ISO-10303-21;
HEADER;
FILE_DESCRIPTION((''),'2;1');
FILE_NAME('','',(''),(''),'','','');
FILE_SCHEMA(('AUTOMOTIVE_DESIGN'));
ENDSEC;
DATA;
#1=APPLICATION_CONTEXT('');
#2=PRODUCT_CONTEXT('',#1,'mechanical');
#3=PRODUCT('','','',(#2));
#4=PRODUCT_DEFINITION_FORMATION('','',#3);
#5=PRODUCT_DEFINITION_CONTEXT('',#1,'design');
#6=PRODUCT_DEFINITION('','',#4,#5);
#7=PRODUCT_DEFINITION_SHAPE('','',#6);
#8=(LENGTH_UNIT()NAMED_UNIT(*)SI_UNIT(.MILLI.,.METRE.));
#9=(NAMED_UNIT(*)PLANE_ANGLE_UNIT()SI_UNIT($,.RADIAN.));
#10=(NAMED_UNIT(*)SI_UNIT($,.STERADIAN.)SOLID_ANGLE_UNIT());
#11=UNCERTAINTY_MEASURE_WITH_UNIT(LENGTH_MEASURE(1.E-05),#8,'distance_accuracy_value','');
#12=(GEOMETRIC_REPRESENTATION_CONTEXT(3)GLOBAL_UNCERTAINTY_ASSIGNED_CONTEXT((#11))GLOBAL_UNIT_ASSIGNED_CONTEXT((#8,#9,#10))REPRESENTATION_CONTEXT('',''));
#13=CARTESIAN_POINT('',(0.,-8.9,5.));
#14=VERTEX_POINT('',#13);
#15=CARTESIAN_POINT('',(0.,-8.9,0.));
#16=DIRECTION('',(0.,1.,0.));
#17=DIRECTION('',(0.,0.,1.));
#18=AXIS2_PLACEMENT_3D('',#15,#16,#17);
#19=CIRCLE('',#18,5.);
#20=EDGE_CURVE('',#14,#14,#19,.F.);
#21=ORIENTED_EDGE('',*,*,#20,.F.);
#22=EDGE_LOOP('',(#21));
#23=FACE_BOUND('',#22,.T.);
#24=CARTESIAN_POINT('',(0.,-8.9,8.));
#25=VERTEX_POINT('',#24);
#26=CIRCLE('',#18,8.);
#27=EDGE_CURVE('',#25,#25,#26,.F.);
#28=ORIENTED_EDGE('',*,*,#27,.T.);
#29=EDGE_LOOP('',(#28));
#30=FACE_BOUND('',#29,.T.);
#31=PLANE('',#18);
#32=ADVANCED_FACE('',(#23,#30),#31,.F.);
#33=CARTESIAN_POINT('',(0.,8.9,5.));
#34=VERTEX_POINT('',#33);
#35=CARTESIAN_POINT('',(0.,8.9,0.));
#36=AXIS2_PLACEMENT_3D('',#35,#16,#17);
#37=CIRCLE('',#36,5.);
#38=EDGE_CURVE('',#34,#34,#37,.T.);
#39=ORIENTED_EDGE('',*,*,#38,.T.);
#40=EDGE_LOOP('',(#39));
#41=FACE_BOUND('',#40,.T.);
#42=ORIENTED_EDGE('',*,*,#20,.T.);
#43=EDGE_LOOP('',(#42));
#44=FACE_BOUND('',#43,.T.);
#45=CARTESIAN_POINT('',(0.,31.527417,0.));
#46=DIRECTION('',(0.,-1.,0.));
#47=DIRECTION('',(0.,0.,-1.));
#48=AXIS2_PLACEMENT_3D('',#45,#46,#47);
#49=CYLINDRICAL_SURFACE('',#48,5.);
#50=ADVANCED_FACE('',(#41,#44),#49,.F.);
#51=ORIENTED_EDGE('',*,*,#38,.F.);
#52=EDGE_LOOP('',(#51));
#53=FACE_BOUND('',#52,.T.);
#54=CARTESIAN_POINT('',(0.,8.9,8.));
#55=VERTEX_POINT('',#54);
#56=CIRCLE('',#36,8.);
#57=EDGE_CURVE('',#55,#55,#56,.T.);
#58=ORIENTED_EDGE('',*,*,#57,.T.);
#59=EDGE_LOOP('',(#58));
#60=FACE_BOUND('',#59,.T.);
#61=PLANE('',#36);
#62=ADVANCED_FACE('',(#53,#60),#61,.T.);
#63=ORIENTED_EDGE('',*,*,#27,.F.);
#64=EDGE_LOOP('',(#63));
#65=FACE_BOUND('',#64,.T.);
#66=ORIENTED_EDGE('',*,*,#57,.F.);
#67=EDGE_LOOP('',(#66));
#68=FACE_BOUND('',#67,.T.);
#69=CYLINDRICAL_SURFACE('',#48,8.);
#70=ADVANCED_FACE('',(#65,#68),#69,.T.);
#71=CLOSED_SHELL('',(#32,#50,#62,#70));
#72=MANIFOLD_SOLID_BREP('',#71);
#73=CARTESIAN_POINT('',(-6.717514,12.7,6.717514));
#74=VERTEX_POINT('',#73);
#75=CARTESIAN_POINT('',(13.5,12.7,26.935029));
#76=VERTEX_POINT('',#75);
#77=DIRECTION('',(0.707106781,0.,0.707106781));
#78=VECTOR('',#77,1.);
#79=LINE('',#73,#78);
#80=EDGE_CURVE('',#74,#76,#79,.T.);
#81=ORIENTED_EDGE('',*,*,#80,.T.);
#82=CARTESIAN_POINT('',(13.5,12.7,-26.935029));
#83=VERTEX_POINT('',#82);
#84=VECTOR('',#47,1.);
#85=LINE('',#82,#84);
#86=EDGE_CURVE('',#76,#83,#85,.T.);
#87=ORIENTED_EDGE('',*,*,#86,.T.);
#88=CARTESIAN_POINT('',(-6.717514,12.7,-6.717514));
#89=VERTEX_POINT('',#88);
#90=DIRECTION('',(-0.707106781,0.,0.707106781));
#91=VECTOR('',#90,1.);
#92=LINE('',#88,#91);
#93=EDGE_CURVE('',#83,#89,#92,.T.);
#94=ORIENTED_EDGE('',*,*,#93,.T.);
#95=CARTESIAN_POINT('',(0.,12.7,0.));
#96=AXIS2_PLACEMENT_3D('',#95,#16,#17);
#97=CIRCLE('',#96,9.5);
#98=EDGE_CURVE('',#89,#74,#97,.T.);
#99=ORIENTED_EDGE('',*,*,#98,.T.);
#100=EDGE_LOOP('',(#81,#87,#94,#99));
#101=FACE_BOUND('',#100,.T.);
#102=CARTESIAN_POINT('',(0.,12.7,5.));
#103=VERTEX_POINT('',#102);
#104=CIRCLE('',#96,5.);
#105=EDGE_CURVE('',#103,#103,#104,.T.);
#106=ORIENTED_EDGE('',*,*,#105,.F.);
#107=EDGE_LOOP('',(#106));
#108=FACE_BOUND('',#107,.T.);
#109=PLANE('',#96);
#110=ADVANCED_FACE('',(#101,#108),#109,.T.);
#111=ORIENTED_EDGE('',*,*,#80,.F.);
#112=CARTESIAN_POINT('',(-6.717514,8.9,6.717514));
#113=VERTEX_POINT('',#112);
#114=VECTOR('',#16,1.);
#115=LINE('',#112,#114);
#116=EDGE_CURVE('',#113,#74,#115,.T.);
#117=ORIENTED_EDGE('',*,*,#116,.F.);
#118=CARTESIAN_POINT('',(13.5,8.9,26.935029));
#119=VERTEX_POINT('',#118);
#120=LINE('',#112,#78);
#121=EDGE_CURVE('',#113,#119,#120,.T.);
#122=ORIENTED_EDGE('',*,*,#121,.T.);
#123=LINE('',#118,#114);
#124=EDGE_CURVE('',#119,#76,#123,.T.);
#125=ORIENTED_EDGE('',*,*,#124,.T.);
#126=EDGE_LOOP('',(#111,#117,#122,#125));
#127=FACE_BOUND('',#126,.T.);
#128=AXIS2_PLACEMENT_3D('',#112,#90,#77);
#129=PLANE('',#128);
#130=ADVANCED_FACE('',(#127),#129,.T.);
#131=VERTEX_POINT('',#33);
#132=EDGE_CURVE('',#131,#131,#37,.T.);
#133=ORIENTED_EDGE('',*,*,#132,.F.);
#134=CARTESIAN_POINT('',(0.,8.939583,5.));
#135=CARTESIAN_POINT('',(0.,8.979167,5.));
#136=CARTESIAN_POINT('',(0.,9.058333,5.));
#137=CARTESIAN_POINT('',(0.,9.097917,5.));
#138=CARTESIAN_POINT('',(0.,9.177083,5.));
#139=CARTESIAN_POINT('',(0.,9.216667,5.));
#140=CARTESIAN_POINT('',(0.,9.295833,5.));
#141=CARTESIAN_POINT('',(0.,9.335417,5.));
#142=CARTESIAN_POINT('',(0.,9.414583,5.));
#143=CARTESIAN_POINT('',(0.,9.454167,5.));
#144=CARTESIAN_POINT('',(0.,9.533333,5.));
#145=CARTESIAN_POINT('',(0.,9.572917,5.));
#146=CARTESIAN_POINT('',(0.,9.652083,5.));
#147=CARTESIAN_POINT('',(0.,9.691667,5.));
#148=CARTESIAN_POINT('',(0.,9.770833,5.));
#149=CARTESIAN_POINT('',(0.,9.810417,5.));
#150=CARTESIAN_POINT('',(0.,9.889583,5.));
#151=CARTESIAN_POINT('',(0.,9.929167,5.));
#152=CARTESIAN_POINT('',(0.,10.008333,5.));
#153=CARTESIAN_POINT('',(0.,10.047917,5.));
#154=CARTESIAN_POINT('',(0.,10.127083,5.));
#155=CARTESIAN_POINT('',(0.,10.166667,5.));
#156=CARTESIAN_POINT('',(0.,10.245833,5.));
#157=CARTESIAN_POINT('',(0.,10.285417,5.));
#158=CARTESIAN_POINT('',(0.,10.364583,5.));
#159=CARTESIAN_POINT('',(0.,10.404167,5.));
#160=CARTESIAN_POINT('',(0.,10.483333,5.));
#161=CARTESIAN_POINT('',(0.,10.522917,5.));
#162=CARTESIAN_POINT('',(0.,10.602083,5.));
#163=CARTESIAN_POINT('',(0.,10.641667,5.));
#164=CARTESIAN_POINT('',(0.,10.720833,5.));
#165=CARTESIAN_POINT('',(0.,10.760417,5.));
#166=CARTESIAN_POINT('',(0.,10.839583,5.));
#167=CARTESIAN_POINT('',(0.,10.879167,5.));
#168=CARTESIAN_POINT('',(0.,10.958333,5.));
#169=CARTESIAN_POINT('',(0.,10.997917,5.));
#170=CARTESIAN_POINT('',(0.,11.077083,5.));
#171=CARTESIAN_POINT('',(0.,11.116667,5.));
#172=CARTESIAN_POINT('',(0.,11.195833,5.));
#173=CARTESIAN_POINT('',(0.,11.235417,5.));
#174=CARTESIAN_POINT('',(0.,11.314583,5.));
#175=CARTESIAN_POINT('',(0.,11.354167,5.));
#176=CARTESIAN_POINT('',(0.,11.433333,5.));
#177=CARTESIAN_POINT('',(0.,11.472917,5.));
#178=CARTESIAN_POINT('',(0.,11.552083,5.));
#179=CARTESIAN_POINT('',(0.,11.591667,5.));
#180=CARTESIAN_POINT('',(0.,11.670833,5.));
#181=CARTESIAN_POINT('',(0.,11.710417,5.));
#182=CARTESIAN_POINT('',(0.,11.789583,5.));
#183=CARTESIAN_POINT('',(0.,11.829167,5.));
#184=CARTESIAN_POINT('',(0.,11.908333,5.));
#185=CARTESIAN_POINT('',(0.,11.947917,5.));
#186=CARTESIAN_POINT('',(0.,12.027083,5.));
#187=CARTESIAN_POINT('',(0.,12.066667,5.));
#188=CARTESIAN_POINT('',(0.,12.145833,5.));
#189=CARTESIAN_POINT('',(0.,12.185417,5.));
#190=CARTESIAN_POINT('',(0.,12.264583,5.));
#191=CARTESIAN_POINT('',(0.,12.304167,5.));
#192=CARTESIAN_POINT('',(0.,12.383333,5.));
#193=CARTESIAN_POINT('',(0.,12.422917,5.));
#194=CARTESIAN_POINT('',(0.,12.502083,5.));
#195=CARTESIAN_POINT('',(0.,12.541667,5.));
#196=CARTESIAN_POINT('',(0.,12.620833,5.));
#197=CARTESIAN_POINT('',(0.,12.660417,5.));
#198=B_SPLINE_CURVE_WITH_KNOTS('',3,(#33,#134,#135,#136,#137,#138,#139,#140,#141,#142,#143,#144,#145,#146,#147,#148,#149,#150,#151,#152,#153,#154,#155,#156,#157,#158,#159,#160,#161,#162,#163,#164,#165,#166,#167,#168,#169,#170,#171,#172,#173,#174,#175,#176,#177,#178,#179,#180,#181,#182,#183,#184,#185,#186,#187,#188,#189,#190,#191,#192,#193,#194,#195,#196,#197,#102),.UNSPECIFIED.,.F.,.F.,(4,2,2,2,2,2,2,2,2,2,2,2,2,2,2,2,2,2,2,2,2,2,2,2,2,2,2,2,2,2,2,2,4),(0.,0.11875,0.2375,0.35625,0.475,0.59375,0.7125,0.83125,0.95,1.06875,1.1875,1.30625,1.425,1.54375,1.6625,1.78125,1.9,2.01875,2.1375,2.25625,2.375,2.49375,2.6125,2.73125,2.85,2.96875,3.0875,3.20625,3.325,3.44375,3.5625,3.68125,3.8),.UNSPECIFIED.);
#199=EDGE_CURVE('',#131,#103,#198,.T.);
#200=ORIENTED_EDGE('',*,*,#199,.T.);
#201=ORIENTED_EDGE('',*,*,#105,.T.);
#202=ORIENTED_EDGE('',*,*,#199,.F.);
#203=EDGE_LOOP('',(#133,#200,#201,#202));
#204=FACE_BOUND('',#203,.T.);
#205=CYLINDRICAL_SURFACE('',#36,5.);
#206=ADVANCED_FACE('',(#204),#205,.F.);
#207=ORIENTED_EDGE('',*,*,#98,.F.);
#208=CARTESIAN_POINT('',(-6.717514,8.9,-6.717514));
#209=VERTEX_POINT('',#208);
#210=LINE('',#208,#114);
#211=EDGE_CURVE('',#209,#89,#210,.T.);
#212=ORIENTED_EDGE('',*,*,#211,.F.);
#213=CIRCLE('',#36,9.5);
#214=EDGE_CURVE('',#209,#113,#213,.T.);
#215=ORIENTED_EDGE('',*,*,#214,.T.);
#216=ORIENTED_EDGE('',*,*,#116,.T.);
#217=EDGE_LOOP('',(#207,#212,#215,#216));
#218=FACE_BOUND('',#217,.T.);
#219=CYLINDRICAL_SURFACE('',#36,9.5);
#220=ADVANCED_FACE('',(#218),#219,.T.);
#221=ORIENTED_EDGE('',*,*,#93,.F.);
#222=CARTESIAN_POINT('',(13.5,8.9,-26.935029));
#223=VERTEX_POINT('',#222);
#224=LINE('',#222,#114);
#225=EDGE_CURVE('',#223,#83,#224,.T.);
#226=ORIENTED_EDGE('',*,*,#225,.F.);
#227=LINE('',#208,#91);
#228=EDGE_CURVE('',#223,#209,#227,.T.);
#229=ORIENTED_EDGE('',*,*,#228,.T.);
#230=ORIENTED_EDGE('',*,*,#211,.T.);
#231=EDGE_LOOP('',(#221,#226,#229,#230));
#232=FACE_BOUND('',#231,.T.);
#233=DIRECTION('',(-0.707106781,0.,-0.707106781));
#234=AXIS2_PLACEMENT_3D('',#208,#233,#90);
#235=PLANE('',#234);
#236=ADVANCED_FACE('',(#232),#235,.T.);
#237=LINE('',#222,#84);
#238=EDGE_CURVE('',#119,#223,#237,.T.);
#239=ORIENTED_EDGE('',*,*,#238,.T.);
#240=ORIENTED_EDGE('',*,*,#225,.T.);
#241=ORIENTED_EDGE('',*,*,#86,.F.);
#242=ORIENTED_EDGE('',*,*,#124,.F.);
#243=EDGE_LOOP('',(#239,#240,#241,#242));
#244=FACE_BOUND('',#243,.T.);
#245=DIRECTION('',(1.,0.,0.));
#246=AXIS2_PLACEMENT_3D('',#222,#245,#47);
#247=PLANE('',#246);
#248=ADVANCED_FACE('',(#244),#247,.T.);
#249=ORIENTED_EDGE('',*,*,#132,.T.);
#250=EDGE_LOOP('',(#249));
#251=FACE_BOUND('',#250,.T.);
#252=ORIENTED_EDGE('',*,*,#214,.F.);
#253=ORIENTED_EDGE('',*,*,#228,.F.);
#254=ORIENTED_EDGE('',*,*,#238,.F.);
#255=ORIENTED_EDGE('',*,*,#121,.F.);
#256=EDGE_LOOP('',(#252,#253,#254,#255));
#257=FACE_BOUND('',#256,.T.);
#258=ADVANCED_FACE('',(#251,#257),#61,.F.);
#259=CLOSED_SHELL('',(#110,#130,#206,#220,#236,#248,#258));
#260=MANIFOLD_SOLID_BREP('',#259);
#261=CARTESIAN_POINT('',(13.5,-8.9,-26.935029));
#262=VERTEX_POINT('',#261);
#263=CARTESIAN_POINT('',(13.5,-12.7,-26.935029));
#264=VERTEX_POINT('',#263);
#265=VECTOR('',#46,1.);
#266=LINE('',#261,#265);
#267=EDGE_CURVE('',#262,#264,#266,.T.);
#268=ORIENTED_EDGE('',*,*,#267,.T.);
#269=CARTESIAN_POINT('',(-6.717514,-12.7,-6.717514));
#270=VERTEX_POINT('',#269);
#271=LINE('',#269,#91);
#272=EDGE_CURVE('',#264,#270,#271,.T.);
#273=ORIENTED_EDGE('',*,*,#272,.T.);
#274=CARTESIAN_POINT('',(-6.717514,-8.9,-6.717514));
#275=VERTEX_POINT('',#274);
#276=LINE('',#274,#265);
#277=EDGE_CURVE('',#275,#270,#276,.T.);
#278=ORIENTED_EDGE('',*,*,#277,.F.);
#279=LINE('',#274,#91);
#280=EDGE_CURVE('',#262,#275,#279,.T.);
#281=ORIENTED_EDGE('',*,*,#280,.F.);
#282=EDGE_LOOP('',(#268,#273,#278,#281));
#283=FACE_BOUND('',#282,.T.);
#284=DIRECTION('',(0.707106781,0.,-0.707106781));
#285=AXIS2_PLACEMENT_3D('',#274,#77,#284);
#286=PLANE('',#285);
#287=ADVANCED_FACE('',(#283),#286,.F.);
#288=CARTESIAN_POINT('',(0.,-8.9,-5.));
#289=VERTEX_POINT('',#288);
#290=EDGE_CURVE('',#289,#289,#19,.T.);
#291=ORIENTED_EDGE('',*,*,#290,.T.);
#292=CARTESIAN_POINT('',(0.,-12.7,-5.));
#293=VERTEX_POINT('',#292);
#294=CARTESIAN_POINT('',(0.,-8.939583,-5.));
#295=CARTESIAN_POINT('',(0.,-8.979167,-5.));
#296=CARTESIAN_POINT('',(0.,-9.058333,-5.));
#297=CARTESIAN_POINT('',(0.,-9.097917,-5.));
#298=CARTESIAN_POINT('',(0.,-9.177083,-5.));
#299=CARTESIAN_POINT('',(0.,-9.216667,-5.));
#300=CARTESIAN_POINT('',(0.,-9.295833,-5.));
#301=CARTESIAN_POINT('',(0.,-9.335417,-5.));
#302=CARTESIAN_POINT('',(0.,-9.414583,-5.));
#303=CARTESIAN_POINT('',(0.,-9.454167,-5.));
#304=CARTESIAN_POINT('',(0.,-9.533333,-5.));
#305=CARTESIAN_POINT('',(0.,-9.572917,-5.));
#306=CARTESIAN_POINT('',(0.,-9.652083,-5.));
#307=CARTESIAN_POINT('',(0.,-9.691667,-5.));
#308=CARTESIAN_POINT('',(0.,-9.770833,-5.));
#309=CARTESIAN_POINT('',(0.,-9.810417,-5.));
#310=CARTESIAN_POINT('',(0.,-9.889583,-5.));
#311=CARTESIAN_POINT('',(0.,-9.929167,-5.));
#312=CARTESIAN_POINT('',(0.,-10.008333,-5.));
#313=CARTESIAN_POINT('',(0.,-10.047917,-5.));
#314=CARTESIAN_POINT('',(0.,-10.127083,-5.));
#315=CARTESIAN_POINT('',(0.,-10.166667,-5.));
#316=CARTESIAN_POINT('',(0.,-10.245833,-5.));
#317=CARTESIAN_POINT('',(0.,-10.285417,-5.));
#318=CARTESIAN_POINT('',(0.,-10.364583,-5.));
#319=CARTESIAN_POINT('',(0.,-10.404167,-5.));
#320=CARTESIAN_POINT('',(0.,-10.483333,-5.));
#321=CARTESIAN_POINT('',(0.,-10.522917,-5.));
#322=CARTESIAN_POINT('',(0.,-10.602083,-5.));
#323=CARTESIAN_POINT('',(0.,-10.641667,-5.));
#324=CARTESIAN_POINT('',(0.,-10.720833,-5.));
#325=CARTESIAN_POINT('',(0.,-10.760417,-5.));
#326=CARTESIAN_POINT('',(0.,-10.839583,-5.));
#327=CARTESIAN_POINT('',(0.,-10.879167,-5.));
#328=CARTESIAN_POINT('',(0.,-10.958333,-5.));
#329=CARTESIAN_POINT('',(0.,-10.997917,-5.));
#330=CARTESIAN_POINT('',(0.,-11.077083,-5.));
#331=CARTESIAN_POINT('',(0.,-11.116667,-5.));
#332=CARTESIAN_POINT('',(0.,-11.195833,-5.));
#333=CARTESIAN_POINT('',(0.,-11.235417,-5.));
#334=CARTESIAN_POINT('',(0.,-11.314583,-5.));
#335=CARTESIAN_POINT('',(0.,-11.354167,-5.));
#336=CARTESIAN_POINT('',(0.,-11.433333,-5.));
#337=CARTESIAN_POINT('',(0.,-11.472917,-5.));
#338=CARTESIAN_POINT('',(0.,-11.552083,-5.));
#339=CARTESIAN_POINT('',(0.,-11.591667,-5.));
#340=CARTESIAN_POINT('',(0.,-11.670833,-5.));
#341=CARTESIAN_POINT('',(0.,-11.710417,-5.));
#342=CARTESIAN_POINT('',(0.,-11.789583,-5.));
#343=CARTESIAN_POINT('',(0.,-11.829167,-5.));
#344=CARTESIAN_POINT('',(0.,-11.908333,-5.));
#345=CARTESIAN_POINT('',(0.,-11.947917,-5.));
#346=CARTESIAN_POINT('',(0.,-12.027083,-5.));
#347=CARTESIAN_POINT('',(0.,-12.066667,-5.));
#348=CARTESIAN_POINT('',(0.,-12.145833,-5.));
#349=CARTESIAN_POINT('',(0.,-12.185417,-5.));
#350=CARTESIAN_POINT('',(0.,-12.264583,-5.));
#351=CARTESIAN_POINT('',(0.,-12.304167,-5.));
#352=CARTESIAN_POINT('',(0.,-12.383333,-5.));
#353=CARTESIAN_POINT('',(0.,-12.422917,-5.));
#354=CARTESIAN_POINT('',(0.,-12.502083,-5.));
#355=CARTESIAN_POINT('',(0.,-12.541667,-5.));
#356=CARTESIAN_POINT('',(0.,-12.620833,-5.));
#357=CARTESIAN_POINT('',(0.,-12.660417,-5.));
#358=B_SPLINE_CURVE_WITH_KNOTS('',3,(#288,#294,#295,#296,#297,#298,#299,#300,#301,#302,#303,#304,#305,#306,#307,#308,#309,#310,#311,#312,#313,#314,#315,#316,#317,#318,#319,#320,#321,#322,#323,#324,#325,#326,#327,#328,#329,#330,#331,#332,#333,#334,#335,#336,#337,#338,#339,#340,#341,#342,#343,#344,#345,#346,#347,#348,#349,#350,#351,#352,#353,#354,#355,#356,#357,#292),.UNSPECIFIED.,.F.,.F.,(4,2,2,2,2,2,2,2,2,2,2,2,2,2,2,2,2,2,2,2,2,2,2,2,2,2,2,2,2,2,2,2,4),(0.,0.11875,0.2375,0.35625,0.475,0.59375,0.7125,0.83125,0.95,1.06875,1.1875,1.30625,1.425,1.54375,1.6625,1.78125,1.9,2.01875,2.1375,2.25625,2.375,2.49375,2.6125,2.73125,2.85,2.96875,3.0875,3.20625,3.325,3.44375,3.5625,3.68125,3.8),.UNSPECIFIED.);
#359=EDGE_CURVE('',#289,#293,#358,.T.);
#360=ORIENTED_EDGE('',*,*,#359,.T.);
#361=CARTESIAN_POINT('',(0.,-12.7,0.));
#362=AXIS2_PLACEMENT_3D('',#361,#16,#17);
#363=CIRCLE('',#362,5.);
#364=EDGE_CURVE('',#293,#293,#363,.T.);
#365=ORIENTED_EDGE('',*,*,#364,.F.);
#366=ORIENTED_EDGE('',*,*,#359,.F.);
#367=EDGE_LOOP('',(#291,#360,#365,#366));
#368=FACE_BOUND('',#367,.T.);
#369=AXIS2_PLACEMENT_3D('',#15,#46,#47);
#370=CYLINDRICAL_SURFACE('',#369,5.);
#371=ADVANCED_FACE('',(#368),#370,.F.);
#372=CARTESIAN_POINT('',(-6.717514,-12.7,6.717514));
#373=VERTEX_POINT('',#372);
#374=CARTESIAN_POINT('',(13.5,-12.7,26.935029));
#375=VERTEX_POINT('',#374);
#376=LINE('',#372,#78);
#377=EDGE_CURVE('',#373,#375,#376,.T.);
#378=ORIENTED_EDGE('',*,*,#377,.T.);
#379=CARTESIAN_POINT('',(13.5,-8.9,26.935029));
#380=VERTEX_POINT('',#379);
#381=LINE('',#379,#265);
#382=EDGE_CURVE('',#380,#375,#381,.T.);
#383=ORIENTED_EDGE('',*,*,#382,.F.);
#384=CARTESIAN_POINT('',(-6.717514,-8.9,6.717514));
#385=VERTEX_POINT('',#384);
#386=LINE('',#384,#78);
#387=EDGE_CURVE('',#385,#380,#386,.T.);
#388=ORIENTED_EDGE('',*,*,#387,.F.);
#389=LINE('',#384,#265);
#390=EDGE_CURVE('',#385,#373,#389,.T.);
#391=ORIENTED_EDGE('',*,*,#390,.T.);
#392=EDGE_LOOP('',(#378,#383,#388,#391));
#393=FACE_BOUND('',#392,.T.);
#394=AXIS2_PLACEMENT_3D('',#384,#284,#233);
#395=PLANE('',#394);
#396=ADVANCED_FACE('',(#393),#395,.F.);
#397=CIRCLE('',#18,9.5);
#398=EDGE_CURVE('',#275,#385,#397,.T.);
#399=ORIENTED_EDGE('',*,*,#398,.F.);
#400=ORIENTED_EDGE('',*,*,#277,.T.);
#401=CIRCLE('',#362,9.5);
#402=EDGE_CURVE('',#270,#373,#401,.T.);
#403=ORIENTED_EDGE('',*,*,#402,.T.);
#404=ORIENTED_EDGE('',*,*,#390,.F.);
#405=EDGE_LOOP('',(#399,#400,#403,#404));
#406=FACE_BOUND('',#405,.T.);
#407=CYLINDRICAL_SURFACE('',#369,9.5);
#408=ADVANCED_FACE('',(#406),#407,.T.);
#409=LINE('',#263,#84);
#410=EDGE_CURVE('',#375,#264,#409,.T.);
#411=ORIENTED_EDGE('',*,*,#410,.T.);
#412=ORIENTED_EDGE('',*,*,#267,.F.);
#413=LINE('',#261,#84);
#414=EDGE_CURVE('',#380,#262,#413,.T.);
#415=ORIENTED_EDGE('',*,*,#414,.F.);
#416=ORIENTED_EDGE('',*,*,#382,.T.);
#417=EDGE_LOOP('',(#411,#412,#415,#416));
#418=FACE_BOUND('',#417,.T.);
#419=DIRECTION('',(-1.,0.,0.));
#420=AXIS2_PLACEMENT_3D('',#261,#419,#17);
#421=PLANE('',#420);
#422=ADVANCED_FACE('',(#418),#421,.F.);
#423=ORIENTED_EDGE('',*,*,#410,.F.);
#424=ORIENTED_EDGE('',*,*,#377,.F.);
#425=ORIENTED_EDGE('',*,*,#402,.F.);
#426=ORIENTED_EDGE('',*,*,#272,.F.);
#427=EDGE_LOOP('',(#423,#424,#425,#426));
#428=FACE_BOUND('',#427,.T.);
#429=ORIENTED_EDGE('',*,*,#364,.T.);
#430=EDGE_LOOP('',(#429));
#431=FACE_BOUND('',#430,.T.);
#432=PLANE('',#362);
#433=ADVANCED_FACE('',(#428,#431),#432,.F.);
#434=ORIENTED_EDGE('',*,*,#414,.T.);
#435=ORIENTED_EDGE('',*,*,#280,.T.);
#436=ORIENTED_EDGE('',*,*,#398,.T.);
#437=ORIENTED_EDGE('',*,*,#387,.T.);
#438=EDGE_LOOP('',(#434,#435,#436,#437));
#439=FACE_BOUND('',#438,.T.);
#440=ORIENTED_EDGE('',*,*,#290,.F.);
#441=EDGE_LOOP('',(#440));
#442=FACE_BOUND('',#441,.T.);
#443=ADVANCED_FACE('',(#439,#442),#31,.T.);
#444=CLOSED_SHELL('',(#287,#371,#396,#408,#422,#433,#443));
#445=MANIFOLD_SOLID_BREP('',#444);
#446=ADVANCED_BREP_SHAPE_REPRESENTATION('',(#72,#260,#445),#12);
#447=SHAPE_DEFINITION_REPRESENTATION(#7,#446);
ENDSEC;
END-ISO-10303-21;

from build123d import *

# Parameters (mm, degrees)
BOSS_EXTRUDE1_START       = 12.7
SKETCH1_R                 = 5
BOSS_EXTRUDE1_DEPTH       = 3.8
BOSS_EXTRUDE2_START       = -12.7
SKETCH1_2_R               = 5
BOSS_EXTRUDE2_DEPTH       = 3.8
BOSS_EXTRUDE3_START       = -8.9
BOSS_EXTRUDE3_OUTLINE_R   = 8
BOSS_EXTRUDE3_OUTLINE_R_2 = 5
BOSS_EXTRUDE3_DEPTH       = 17.8


# Read off the part's stored shape, not the designer's step: Boss-Extrude3
with BuildPart() as part:
    # Sketch1 → Boss-Extrude1 (new body)
    with BuildSketch(Plane(origin=(0, 0, 0), x_dir=(1, 0, 0), z_dir=(0, 1, 0)).offset(BOSS_EXTRUDE1_START)):
        with BuildLine():
            Line((13.5, 26.935028843), (13.5, -26.935028843))
            Line((13.5, -26.935028843), (-6.717514421, -6.717514421))
            ThreePointArc((-6.717514421, -6.717514421), (-9.5, 0), (-6.717514421, 6.717514421))
            Line((-6.717514421, 6.717514421), (13.5, 26.935028843))
        make_face()
        with Locations(Location((0, 0, 0), (0, 0, 270))):
            Circle(SKETCH1_R, mode=Mode.SUBTRACT)
    extrude(amount=-BOSS_EXTRUDE1_DEPTH)


with BuildPart() as body_2:
    # Sketch1<2> → Boss-Extrude2 (new body)
    with BuildSketch(Plane(origin=(0, 0, 0), x_dir=(1, 0, 0), z_dir=(0, 1, 0)).offset(BOSS_EXTRUDE2_START)):
        with BuildLine():
            Line((13.5, 26.935028843), (13.5, -26.935028843))
            Line((13.5, -26.935028843), (-6.717514421, -6.717514421))
            ThreePointArc((-6.717514421, -6.717514421), (-9.5, 0), (-6.717514421, 6.717514421))
            Line((-6.717514421, 6.717514421), (13.5, 26.935028843))
        make_face()
        with Locations(Location((0, 0, 0), (0, 0, 90))):
            Circle(SKETCH1_2_R, mode=Mode.SUBTRACT)
    extrude(amount=BOSS_EXTRUDE2_DEPTH)


with BuildPart() as body_3:
    # Boss-Extrude3 outline → Boss-Extrude3 (new body)
    with BuildSketch(Plane(origin=(0, 0, 0), x_dir=(1, 0, 0), z_dir=(0, 1, 0)).offset(BOSS_EXTRUDE3_START)):
        Circle(BOSS_EXTRUDE3_OUTLINE_R)
        Circle(BOSS_EXTRUDE3_OUTLINE_R_2, mode=Mode.SUBTRACT)
    extrude(amount=BOSS_EXTRUDE3_DEPTH)


solid = Compound([part.part, body_2.part, body_3.part])
